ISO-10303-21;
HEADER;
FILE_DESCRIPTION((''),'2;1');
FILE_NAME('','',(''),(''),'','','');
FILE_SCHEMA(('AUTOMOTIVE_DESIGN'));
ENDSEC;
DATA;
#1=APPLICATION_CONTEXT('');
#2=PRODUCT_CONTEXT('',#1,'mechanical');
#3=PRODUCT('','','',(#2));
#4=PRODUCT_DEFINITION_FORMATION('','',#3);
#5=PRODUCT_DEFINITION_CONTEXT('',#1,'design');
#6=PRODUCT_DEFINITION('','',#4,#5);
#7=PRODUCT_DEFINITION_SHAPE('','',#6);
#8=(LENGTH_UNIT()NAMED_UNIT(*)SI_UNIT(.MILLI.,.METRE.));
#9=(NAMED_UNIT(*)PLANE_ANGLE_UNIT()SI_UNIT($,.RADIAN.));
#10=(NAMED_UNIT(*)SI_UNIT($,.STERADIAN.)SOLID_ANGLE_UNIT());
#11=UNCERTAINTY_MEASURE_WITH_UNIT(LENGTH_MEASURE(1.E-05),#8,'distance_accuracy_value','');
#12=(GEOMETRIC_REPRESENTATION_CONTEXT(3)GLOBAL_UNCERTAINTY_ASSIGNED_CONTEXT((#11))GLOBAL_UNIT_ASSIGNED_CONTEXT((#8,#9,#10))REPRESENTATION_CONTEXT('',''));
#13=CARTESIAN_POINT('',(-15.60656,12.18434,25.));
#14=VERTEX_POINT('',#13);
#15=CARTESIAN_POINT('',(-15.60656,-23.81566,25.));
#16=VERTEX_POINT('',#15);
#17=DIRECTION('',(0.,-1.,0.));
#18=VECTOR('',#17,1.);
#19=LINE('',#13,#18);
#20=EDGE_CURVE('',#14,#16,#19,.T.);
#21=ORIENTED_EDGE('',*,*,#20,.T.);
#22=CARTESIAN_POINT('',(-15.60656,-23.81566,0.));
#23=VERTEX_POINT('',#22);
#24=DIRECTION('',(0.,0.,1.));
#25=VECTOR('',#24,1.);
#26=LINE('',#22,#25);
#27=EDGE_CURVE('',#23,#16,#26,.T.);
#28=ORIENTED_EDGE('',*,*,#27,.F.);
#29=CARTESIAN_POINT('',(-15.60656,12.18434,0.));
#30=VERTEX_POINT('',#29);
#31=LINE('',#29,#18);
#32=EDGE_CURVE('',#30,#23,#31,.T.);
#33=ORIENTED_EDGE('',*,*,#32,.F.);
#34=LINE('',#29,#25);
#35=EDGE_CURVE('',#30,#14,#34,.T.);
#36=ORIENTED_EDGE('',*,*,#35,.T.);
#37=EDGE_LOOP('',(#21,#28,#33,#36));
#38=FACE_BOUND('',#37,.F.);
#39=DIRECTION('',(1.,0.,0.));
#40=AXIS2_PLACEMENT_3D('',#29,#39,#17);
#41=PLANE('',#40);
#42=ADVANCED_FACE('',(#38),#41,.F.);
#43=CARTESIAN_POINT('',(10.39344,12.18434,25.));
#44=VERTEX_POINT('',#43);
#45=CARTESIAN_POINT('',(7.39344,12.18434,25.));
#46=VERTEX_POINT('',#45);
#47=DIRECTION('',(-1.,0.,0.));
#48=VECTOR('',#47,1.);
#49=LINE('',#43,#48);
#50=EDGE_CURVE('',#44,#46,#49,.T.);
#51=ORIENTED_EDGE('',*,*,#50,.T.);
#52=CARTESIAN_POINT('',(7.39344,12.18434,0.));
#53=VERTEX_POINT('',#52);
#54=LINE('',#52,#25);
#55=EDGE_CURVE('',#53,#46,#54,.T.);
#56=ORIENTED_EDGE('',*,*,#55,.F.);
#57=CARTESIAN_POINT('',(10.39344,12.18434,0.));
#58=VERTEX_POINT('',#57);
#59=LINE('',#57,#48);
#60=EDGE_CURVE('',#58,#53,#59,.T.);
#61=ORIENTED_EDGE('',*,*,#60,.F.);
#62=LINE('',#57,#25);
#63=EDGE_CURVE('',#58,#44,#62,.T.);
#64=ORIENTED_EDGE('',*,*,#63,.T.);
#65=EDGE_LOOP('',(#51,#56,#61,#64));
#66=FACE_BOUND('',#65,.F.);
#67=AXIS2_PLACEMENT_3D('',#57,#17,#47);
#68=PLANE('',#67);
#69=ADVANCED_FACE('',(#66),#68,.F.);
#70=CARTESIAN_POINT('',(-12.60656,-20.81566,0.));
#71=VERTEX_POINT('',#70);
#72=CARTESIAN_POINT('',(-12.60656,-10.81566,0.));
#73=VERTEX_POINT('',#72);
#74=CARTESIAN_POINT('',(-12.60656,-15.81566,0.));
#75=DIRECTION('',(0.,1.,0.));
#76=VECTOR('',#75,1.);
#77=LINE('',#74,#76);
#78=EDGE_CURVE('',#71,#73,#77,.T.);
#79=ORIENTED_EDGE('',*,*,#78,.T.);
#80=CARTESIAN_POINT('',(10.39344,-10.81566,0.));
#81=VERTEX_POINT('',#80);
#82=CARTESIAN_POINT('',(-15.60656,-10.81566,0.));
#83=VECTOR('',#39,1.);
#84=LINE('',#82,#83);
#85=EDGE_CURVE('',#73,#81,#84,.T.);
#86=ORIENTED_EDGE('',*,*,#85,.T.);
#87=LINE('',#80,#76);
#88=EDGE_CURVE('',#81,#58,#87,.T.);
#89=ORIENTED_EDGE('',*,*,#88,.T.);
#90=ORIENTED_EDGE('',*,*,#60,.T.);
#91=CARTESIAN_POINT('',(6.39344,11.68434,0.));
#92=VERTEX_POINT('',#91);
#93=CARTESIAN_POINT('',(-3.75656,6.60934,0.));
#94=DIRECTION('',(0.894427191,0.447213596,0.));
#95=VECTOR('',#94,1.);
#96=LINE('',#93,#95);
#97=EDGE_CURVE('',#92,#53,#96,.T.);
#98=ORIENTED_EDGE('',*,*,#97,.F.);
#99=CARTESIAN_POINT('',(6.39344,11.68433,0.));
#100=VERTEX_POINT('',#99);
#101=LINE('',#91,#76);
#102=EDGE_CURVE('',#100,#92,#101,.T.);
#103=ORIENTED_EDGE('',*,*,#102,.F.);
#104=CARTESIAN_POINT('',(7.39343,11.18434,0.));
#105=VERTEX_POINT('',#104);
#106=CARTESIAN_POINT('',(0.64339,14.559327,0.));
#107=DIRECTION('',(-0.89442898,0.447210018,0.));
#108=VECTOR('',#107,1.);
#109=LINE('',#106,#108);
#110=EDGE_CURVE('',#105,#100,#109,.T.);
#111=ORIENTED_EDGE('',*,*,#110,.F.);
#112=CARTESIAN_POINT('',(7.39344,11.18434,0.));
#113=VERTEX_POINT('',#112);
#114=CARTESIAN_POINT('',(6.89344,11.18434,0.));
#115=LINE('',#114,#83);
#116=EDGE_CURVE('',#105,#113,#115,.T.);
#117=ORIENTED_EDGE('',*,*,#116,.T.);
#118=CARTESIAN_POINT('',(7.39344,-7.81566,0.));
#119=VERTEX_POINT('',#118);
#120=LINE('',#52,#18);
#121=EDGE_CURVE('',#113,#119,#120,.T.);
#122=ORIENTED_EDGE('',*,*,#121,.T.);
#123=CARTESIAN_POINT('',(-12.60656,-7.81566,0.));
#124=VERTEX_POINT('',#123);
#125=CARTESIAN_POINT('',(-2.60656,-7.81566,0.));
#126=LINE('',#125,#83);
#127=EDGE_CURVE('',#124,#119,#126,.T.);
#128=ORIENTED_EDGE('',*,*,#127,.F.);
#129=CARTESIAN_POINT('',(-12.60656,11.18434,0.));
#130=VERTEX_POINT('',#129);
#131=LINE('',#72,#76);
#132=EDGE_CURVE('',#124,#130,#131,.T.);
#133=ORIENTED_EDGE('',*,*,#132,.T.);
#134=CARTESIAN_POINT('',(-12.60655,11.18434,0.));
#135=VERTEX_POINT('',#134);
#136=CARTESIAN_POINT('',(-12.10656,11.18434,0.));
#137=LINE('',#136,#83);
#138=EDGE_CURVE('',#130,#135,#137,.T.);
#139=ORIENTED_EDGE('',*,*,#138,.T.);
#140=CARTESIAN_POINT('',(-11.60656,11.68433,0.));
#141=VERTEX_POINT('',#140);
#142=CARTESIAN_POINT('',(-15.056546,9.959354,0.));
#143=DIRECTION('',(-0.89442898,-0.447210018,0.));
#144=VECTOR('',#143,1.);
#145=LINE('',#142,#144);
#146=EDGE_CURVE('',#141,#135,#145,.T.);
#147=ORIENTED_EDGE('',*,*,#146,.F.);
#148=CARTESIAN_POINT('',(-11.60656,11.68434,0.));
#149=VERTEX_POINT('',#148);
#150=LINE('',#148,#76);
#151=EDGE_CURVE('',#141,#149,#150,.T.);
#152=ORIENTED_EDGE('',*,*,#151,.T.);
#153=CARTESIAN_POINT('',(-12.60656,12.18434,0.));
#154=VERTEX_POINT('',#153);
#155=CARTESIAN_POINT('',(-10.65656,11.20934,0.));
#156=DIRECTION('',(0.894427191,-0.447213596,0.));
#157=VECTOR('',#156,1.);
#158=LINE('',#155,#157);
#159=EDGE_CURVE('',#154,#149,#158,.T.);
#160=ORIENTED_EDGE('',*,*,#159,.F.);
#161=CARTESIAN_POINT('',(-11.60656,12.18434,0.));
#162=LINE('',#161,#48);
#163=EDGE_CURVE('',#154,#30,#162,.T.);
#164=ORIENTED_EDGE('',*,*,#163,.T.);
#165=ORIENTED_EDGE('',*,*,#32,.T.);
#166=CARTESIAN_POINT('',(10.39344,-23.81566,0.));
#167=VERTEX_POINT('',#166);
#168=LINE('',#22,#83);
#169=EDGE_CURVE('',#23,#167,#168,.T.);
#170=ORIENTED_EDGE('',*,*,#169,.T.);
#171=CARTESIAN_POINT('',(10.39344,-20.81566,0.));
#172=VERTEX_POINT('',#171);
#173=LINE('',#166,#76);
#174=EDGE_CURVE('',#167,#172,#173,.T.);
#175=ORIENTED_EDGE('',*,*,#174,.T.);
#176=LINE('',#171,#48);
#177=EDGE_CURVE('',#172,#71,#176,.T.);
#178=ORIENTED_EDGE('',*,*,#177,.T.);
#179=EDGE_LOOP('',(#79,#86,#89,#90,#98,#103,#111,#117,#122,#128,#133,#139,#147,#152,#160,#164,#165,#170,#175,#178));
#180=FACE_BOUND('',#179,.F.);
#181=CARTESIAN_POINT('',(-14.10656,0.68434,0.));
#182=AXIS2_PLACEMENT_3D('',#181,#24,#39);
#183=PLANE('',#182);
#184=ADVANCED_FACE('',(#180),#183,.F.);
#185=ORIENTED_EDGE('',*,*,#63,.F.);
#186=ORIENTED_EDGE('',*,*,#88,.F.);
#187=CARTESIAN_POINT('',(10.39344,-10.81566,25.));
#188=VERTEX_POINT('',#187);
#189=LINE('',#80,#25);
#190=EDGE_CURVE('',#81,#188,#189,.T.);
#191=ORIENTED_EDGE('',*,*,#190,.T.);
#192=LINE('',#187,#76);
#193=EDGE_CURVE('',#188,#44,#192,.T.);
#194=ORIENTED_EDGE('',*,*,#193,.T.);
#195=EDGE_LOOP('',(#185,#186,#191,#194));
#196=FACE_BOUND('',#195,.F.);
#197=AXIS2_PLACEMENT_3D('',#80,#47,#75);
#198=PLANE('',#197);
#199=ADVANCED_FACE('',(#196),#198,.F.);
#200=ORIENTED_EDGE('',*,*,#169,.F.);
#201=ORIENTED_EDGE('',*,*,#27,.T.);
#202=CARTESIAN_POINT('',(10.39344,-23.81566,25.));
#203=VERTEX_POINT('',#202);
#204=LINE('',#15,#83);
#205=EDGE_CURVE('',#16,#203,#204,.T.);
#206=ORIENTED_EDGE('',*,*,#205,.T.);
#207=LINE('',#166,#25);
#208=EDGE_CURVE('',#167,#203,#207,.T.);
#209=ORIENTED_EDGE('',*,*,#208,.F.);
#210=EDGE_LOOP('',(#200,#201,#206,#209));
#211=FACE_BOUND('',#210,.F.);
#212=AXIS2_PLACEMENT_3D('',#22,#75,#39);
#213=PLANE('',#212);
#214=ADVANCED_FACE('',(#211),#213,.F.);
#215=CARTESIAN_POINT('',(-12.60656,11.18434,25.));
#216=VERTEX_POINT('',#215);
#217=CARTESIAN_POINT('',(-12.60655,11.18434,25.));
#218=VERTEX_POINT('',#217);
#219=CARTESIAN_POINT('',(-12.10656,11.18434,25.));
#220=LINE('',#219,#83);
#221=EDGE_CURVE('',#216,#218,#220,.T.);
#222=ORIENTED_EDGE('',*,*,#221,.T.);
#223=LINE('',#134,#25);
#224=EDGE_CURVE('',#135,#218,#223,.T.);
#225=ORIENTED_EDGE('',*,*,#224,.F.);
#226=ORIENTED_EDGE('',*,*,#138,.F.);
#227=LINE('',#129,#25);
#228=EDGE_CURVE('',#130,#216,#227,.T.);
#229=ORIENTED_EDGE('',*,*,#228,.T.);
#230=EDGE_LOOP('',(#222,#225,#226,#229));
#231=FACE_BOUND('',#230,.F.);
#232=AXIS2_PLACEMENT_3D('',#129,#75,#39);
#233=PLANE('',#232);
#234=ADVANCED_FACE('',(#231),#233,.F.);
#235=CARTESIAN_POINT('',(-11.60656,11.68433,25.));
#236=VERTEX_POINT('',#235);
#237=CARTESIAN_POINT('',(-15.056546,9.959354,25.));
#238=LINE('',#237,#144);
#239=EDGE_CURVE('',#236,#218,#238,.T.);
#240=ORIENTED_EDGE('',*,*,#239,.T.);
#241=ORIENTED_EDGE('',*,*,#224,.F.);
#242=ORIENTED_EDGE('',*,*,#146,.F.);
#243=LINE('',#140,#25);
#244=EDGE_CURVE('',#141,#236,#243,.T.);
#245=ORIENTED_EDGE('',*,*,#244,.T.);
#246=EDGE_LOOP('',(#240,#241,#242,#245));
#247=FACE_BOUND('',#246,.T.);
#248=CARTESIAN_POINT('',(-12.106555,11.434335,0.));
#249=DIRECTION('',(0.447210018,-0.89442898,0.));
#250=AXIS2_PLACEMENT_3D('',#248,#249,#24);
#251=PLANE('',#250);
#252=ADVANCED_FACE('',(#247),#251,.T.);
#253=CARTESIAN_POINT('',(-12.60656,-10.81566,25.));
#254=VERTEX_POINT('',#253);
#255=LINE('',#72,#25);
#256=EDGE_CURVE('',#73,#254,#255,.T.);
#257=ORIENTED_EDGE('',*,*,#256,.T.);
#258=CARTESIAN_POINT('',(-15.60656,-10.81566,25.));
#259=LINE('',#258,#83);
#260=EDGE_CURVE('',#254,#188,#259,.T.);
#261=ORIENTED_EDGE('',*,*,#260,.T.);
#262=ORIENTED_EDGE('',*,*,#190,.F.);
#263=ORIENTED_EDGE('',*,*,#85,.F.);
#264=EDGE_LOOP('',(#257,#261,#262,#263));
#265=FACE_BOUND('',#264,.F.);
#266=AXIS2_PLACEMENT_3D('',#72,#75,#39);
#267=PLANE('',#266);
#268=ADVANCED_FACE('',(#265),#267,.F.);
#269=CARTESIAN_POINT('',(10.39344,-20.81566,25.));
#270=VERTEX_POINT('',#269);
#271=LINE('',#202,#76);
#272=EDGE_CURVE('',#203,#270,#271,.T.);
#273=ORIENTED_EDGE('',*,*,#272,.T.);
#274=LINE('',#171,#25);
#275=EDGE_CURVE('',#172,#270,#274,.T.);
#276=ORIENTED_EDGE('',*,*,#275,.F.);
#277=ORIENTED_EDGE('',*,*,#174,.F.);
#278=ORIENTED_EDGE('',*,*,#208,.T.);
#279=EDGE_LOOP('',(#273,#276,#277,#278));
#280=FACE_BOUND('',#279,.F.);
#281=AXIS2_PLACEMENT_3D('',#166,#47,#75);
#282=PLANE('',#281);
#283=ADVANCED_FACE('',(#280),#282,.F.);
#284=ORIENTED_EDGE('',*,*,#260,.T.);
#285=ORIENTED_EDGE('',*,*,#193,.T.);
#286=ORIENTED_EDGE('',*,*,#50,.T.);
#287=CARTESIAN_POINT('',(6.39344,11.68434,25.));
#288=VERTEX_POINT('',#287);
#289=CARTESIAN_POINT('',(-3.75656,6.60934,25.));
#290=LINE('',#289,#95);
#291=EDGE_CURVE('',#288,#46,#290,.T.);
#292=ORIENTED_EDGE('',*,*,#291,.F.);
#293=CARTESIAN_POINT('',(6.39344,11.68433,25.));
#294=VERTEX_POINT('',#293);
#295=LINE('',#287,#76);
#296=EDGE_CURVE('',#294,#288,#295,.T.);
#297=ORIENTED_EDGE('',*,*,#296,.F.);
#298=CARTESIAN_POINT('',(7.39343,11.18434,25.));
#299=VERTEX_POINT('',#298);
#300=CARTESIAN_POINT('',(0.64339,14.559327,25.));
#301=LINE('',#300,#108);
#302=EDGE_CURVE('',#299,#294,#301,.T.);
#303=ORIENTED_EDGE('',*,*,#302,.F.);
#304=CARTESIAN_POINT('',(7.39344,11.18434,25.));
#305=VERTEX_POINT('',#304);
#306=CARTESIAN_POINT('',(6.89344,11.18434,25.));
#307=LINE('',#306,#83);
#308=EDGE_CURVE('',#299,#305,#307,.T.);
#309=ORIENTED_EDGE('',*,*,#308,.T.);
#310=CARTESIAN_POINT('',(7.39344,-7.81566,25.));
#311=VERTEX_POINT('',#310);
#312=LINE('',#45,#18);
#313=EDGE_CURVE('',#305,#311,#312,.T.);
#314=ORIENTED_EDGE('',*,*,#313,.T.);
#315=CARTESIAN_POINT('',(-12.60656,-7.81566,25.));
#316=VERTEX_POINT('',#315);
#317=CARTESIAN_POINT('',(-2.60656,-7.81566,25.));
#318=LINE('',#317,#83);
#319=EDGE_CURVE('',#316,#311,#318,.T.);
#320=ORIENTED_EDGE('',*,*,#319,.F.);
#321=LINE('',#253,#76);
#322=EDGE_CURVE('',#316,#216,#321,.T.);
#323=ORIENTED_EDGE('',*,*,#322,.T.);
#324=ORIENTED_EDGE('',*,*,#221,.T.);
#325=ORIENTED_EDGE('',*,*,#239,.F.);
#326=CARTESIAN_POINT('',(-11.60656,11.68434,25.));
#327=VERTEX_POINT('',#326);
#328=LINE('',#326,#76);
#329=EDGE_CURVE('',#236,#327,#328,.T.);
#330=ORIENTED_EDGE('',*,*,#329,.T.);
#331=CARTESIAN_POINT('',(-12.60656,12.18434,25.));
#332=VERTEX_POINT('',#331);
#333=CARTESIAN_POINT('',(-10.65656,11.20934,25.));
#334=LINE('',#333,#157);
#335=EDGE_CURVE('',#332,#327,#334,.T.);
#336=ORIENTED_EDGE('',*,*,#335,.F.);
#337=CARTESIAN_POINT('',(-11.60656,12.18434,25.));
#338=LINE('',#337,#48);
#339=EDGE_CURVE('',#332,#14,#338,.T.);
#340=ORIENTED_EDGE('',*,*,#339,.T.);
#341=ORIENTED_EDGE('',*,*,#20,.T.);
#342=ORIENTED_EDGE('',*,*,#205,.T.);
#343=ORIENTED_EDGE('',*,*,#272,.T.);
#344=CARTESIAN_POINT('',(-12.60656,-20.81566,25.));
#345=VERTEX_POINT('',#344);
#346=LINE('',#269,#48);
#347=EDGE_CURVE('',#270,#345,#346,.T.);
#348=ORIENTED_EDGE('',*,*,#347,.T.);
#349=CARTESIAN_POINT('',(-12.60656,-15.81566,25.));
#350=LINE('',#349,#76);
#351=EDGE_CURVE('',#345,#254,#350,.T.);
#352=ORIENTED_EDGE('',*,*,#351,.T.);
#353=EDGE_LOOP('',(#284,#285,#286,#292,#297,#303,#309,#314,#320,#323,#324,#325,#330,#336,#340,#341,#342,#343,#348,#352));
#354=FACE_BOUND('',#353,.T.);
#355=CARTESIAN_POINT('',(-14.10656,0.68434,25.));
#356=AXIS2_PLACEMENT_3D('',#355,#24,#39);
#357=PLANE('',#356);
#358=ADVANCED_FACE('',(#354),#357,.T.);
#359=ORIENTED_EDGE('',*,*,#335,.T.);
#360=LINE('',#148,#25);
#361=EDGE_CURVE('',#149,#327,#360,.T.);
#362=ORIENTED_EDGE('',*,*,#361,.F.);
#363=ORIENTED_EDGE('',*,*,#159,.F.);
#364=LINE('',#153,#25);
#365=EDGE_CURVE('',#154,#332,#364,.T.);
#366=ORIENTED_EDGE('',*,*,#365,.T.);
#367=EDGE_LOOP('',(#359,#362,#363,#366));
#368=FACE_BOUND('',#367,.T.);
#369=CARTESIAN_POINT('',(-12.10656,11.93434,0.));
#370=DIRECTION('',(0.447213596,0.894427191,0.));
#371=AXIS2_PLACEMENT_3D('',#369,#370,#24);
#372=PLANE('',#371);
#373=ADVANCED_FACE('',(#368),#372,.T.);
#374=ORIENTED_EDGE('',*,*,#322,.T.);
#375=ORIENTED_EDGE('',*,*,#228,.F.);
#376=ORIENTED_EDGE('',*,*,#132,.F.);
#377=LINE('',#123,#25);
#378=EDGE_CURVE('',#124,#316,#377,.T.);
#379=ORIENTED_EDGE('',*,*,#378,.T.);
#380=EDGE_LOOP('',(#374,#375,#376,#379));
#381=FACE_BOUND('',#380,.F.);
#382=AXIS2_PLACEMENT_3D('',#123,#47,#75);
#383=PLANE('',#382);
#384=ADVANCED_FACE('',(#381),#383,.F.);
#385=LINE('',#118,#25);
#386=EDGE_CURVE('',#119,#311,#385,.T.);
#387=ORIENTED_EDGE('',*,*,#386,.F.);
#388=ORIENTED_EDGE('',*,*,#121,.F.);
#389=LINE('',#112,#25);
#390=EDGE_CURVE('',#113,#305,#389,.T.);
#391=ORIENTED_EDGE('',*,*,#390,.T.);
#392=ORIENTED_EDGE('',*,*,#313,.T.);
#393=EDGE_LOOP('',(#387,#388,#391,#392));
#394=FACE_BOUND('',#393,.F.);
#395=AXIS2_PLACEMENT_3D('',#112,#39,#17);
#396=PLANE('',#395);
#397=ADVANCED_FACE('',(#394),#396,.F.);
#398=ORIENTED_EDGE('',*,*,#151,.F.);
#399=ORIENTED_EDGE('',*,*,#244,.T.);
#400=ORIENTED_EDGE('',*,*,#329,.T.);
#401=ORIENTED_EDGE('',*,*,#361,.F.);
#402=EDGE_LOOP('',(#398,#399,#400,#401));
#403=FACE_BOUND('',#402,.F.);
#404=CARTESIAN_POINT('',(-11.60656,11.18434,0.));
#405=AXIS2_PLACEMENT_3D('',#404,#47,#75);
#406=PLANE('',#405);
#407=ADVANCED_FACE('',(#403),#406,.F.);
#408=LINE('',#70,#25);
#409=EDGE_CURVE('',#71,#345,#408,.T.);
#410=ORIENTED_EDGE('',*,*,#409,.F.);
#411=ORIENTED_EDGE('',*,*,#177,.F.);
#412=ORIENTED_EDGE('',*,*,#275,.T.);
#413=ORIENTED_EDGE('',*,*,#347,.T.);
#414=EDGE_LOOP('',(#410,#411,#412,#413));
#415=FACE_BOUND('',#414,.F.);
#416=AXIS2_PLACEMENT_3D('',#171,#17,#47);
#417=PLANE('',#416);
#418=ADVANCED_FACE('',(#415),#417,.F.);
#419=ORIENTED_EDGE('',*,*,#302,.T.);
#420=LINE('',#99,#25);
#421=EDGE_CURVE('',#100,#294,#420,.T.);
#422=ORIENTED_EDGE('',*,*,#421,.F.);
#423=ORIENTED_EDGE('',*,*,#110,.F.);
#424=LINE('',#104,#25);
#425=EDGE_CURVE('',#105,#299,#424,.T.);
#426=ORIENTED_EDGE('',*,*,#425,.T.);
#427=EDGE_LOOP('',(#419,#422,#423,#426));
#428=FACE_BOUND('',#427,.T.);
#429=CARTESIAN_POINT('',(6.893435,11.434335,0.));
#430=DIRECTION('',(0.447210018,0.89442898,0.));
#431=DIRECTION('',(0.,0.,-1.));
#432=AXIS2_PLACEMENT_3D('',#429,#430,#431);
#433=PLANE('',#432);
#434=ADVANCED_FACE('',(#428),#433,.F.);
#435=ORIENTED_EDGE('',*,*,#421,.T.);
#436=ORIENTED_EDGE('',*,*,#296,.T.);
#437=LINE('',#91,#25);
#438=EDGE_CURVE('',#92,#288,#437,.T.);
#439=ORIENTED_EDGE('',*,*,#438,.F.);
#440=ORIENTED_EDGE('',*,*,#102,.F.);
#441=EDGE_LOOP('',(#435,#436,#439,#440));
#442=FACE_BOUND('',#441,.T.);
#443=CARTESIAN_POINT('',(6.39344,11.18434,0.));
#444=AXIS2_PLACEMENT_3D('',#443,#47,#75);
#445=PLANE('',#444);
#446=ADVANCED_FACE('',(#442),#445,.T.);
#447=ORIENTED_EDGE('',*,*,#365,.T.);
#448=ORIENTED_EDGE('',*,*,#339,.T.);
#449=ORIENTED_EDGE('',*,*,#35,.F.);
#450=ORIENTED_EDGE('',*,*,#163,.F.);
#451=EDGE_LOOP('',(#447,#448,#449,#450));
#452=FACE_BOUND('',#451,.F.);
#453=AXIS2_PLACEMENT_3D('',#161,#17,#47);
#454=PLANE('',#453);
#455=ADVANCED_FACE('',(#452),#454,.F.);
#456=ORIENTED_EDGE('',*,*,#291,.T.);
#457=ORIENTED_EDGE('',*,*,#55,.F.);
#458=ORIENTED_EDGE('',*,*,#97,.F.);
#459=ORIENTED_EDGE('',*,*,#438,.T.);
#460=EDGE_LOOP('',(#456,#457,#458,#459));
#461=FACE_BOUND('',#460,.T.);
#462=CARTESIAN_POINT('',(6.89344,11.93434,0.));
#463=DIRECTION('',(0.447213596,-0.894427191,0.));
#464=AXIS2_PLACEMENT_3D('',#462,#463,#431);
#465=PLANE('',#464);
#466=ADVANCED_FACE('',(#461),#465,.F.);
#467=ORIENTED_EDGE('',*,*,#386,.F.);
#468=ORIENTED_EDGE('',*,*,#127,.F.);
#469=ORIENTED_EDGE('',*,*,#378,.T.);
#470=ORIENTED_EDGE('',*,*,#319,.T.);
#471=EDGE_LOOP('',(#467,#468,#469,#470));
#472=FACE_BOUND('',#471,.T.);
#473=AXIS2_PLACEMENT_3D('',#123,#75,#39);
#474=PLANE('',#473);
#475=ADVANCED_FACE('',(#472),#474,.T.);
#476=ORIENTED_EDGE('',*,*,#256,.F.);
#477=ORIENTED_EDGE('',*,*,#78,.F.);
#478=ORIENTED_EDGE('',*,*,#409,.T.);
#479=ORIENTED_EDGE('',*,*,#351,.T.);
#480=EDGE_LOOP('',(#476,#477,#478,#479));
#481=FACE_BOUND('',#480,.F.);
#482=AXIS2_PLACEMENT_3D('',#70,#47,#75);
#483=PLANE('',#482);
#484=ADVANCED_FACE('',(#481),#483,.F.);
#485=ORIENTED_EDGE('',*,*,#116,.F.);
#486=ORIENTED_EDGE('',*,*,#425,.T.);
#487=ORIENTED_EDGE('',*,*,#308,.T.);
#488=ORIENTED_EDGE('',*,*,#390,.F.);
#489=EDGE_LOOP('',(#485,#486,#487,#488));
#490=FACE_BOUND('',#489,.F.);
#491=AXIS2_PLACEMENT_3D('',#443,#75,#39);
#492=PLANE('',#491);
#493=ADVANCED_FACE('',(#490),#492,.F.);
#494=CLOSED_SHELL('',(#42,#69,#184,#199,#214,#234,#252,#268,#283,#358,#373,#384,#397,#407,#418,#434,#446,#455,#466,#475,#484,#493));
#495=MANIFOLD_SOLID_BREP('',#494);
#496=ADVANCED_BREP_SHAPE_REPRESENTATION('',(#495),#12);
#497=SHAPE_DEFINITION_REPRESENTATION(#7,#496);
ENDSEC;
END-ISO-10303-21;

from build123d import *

# Parameters (mm, degrees)
F0_W       = 1
F0_H       = 1
F0_W_2     = 20
F0_H_2     = 3
F0_W_3     = 3
F0_H_3     = 10
F1_DEPTH   = 25
F2_SIZE2   = 0.49999
F2_SIZE    = 0.99999
F2_2_SIZE2 = 0.5
F2_2_SIZE  = 1
F3_SIZE2   = 1
F3_SIZE    = 0.5
F3_2_SIZE2 = 0.99999
F3_2_SIZE  = 0.49999


# Not quite as in the source:
# - a fillet or chamfer is up to 0.001 mm smaller than in the source, because OpenCascade refuses the exact size


with BuildPart() as f1:
    # F0 (on Top) → F1 (new body)
    with BuildSketch(Plane.XY):
        Polygon((-12.6065595312, 12.1843403429), (-15.6065595312, 12.1843403429), (-15.6065595312, -10.8156596571), (-12.6065595312, -10.8156596571), (-12.6065595312, -7.8156596571), (-12.6065595312, 11.1843403429), align=None)
        with Locations((-12.1065595312, 11.6843403429)):
            Rectangle(F0_W, F0_H)
        with Locations((-2.6065595312, -9.3156596571)):
            Rectangle(F0_W_2, F0_H_2)
        Polygon((7.3934404688, -7.8156596571), (7.3934404688, -10.8156596571), (10.3934404688, -10.8156596571), (10.3934404688, 12.1843403429), (7.3934404688, 12.1843403429), (7.3934404688, 11.1843403429), align=None)
        with Locations((-14.1065595312, -15.8156596571)):
            Rectangle(F0_W_3, F0_H_3)
        Polygon((-12.6065595312, -20.8156596571), (-15.6065595312, -20.8156596571), (-15.6065595312, -23.8156596571), (10.3934404688, -23.8156596571), (10.3934404688, -20.8156596571), align=None)
        with Locations((6.8934404688, 11.6843403429)):
            Rectangle(F0_W, F0_H)
    extrude(amount=F1_DEPTH)

    # F2 (size 1 and 0.5 in the source; OpenCascade refuses exactly that, so slightly less here)
    f2_edges = [f1.edges().sort_by_distance(p)[0] for p in [
        (6.39344, 11.18434, 12.5),
    ]]
    f2_side = f1.faces().sort_by_distance((6.89344, 11.18434, 12.5))[0]
    chamfer(f2_edges, length=F2_SIZE, length2=F2_SIZE2, reference=f2_side)

    # F2#2
    f2_2_edges = [f1.edges().sort_by_distance(p)[0] for p in [
        (-11.60656, 12.18434, 12.5),
    ]]
    f2_2_side = f1.faces().sort_by_distance((-13.60656, 12.18434, 12.5))[0]
    chamfer(f2_2_edges, length=F2_2_SIZE, length2=F2_2_SIZE2, reference=f2_2_side)

    # F3
    f3_edges = [f1.edges().sort_by_distance(p)[0] for p in [
        (6.39344, 12.18434, 12.5),
    ]]
    f3_side = f1.faces().sort_by_distance((6.39344, 11.934335, 12.5))[0]
    chamfer(f3_edges, length=F3_SIZE, length2=F3_SIZE2, reference=f3_side)

    # F3#2 (size 0.5 and 1 in the source; OpenCascade refuses exactly that, so slightly less here)
    f3_2_edges = [f1.edges().sort_by_distance(p)[0] for p in [
        (-11.60656, 11.18434, 12.5),
    ]]
    f3_2_side = f1.faces().sort_by_distance((-11.60656, 11.43434, 12.5))[0]
    chamfer(f3_2_edges, length=F3_2_SIZE, length2=F3_2_SIZE2, reference=f3_2_side)


solid = f1.part
